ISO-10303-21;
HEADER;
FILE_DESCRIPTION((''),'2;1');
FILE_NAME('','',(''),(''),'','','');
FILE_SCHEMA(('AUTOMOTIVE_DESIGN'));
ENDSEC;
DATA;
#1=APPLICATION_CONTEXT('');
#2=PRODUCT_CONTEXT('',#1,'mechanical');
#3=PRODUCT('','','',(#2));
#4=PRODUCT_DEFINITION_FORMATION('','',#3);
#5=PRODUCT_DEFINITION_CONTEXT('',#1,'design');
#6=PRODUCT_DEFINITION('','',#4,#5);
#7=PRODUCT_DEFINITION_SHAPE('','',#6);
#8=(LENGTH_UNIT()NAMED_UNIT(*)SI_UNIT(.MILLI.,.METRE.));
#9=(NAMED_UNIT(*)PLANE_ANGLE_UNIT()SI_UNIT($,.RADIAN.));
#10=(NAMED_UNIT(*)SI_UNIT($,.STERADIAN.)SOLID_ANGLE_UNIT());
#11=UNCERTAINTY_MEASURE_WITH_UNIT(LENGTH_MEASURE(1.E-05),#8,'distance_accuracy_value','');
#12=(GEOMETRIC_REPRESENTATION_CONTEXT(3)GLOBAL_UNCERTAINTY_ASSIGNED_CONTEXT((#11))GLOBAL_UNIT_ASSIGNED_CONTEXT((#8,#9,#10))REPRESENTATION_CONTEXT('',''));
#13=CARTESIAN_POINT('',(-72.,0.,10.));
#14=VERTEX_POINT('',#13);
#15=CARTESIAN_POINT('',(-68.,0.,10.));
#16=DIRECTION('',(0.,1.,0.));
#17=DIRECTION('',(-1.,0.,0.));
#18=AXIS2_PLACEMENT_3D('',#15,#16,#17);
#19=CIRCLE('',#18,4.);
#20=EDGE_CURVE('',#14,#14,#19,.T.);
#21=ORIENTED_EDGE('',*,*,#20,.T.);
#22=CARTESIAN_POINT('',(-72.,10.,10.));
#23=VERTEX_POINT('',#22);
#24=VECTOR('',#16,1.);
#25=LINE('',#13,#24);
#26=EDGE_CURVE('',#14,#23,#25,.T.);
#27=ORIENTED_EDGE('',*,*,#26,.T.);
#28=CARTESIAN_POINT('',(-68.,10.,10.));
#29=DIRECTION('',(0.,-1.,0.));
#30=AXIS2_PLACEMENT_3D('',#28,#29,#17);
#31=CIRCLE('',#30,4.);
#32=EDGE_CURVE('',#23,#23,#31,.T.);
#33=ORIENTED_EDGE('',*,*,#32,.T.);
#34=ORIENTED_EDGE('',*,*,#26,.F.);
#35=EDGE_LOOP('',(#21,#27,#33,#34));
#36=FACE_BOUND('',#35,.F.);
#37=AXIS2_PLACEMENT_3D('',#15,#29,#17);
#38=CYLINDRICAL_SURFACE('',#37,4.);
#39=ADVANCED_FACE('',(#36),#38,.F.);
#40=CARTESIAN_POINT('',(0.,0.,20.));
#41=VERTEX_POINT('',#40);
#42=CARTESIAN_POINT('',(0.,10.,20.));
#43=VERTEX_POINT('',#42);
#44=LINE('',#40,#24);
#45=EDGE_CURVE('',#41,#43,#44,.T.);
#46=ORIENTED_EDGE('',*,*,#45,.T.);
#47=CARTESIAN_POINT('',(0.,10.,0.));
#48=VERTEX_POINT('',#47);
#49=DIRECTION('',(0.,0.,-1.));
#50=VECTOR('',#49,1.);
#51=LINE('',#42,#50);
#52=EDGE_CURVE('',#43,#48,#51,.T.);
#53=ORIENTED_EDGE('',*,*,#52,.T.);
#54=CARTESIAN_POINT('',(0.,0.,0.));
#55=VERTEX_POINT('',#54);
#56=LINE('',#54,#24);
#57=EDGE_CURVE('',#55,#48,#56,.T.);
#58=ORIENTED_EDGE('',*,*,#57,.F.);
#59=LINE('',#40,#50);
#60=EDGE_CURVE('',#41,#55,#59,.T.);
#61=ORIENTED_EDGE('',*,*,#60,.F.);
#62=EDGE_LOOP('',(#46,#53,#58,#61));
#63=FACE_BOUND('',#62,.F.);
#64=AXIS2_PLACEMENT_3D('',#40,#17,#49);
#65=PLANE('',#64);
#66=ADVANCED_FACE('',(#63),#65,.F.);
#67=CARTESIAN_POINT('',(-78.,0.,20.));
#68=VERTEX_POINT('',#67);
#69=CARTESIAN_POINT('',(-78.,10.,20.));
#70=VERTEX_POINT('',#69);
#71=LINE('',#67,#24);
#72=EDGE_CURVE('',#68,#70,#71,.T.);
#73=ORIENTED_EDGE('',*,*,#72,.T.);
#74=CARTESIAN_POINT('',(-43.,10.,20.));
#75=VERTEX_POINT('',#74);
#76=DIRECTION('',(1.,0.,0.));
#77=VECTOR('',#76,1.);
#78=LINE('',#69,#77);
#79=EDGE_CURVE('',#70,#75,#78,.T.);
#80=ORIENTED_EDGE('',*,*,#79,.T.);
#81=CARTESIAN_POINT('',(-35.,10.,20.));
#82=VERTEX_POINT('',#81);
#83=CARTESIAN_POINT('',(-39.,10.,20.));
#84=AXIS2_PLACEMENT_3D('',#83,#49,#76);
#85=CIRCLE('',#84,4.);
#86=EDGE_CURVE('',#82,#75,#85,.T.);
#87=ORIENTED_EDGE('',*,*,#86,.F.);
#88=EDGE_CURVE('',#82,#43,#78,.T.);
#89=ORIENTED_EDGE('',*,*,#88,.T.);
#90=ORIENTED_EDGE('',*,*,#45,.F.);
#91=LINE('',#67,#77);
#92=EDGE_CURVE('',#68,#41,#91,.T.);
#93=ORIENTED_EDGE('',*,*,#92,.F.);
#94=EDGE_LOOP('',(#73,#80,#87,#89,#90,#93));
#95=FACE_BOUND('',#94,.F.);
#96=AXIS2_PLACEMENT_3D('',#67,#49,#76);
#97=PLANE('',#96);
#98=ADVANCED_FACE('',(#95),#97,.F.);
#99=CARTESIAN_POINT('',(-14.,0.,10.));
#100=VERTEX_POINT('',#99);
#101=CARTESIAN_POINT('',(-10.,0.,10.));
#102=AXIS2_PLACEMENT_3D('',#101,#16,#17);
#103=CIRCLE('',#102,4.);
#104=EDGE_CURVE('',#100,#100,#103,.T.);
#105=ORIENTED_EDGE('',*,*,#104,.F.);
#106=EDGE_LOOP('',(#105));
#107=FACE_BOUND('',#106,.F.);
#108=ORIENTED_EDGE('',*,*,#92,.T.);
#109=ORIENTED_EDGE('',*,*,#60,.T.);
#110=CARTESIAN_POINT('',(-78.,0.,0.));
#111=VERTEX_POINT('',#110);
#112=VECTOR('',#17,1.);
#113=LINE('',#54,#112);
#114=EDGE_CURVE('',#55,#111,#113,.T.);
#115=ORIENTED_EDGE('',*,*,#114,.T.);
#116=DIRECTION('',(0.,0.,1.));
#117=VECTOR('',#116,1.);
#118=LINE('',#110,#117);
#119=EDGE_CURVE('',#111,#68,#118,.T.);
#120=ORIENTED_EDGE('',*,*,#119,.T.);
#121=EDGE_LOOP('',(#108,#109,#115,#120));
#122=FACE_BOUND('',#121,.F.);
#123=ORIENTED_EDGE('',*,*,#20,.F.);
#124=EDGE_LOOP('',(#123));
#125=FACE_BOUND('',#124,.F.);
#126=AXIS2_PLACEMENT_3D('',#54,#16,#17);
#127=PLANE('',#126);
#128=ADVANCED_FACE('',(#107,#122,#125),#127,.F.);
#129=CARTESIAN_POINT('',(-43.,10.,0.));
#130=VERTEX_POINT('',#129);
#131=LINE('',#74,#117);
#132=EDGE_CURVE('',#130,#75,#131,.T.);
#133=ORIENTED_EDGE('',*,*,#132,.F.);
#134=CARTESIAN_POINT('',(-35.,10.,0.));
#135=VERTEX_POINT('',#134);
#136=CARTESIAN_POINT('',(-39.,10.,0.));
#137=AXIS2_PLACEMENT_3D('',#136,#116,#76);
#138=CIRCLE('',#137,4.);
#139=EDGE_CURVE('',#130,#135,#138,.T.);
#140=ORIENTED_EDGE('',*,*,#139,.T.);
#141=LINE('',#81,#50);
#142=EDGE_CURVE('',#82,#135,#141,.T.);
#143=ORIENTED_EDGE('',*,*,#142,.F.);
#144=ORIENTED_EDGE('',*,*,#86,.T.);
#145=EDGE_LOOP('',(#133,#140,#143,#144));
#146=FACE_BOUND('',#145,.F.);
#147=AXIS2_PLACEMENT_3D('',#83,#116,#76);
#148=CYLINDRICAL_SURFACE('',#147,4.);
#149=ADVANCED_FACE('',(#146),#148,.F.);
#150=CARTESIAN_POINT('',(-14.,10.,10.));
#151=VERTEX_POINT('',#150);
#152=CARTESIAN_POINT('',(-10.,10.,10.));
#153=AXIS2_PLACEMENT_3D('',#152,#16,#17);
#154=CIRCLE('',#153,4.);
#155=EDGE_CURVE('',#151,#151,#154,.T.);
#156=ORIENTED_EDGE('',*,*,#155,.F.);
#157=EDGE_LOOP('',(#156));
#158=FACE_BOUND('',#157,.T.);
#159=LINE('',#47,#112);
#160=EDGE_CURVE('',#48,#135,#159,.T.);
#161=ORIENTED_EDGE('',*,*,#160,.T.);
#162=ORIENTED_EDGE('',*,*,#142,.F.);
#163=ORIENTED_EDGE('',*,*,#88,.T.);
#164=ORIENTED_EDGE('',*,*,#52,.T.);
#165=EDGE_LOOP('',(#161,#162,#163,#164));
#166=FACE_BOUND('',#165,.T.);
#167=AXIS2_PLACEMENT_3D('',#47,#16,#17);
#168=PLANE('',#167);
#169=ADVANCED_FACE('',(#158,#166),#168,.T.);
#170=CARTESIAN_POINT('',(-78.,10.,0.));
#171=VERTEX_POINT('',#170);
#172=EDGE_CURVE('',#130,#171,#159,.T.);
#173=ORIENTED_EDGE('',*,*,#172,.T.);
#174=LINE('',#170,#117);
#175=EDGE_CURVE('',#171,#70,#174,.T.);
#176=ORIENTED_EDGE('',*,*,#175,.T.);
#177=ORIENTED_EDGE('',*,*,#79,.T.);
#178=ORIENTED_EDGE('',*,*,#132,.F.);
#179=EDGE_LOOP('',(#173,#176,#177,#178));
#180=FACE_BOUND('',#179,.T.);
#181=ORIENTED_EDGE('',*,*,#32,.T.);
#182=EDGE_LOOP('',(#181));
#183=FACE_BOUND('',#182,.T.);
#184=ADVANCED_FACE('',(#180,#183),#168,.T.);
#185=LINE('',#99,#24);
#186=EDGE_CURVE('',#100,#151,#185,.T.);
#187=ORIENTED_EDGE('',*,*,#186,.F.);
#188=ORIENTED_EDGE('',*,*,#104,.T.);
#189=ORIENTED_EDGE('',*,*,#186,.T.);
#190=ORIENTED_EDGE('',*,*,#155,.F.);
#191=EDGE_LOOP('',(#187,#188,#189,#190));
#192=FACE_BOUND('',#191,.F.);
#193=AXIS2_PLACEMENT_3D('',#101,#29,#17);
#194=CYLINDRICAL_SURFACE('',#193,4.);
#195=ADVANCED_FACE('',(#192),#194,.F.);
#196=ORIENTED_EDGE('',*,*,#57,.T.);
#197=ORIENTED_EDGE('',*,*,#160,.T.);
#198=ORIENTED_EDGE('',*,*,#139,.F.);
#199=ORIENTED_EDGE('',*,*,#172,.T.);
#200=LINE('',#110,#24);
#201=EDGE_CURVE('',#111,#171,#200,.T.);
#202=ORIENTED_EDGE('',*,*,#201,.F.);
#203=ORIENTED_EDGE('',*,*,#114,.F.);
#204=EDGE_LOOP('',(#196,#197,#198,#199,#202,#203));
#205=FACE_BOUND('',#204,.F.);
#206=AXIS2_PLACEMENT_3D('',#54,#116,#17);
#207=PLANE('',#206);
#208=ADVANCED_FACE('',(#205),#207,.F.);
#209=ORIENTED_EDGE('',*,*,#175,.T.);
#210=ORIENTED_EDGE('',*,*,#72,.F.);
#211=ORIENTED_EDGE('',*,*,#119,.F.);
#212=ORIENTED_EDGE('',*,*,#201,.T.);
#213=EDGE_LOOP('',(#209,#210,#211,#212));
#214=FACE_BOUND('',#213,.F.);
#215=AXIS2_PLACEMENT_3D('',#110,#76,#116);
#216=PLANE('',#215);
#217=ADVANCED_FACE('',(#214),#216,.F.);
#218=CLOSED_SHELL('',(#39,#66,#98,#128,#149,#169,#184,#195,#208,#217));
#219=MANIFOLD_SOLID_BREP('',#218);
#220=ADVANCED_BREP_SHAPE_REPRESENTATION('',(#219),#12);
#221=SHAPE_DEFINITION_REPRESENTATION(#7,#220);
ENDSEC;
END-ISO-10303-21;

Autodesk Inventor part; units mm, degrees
ref_plane "YZ Plane" through (0, 0, 0) normal (1, 0, 0) x (0, 1, 0)
ref_plane "XZ Plane" through (0, 0, 0) normal (0, 1, 0) x (-1, 0, 0)
ref_plane "XY Plane" through (0, 0, 0) normal (0, 0, 1) x (1, 0, 0)
sketch "Sketch1" plane through (0, 0, 0) normal (0, 1, 0) x (-1, 0, 0)
  line L0 (0, 0) -> (78, 0)
  line L1 (78, 0) -> (78, 20)
  line L2 (78, 20) -> (0, 20)
  line L3 (0, 20) -> (0, 0)
  line L4 (39, 10) -> (68, 10)
  line L5 (39, 10) -> (10, 10)
  circle A0 centre (10, 10) radius 4
  circle A1 centre (68, 10) radius 4
  dimension "d0" = 78
  dimension "d1" = 20
  dimension "d2" = 29
  dimension "d3" = 29
  dimension "d4" = 8
  dimension "d5" = 8
extrude "Extrusion1" add sketch "Sketch1" along normal blind 10
sketch "Sketch2" plane through (-78, 0, 20) normal (0, 0, 1) x (1, 0, 0)
  line L0 (0, 10) -> (78, 10) projected
  circle A0 centre (39, 10) radius 4
  dimension "d8" = 8
extrude "Extrusion2" cut sketch "Sketch2" against normal blind 20
properties part number "Z_MotorMount_RodHolder_Part2_V2" material "Birch"
